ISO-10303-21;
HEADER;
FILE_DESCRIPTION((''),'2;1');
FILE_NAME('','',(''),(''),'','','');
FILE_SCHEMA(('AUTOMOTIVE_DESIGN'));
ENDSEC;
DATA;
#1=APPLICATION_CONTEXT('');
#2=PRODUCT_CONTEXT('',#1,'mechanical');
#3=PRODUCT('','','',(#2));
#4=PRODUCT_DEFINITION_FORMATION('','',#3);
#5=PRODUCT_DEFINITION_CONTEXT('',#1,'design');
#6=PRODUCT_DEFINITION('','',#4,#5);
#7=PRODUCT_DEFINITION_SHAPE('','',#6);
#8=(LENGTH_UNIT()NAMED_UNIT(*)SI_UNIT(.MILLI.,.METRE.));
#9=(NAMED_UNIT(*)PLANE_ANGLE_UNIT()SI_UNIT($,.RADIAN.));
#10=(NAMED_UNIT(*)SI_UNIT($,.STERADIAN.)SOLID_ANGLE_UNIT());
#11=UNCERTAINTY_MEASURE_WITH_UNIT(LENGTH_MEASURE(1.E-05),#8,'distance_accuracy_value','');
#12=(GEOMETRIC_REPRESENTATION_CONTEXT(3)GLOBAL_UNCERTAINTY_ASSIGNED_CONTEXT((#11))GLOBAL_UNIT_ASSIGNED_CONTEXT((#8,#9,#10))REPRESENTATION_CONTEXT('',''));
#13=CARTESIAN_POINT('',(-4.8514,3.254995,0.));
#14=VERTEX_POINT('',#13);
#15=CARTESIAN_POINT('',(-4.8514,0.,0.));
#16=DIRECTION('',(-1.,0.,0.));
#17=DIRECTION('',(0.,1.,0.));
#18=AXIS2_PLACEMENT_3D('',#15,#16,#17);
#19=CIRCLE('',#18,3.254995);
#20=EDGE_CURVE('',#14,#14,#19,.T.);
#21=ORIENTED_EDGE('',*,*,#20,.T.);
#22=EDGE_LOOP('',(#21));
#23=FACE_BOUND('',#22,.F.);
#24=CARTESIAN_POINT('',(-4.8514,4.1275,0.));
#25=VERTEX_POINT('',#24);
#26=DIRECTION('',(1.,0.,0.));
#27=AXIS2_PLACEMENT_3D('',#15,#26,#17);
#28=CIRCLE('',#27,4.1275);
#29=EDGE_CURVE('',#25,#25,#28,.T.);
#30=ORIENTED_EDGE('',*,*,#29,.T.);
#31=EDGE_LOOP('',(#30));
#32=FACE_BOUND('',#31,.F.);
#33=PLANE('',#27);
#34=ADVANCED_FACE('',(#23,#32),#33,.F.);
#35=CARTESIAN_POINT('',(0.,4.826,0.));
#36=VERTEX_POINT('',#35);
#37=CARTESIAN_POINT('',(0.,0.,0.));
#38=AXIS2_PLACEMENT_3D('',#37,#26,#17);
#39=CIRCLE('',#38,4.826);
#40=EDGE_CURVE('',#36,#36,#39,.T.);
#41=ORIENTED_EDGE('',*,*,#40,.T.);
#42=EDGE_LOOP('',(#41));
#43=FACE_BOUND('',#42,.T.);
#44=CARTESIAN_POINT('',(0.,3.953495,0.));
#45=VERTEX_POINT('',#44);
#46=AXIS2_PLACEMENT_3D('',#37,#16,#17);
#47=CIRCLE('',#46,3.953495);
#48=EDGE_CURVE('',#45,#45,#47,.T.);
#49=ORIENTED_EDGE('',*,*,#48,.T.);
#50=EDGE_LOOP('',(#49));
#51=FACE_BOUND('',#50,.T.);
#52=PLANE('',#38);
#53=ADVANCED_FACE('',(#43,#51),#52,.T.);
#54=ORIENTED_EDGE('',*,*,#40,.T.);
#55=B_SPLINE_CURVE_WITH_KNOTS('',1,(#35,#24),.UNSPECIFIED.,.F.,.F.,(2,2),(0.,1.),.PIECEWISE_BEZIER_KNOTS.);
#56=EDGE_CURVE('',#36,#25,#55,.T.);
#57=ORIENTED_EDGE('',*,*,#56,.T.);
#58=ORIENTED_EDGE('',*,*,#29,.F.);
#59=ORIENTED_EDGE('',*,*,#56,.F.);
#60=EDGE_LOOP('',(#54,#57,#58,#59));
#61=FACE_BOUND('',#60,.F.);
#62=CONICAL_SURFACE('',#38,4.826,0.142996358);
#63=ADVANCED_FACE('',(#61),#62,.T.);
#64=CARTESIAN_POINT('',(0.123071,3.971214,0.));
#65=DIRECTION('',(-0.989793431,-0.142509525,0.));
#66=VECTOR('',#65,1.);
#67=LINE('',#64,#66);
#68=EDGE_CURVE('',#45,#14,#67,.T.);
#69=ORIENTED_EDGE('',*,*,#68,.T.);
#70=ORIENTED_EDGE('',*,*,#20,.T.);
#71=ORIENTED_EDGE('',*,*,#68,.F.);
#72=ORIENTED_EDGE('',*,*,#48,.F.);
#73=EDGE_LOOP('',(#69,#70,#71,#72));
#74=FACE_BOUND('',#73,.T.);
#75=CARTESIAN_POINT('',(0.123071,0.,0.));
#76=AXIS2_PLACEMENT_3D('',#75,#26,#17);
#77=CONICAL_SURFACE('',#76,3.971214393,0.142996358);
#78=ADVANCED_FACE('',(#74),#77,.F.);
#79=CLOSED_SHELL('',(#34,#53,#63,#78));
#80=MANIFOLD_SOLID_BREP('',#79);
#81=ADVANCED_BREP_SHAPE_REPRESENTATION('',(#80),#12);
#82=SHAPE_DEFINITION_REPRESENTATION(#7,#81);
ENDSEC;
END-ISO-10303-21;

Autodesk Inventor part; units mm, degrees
ref_plane "XZ Plane" through (0, 0, 0) normal (0, 1, 0) x (-1, 0, 0)
ref_plane "XY Plane" through (0, 0, 0) normal (0, 0, 1) x (1, 0, 0)
sketch "Sketch1" plane through (0, 0, 0) normal (1, 0, 0) x (0, 1, 0)
  circle A0 centre (0, 0) radius 4.826
  dimension "d0" = 9.652
ref_plane "Work Plane1" through (-4.8514, 0, 0) normal (1, 0, 0) x (0, 1, 0)
sketch "Sketch2" plane through (-4.8514, 0, 0) normal (1, 0, 0) x (0, 1, 0)
  circle A0 centre (0, 0) radius 4.1275
  dimension "d2" = 8.255
loft "Loft1" add profiles "Sketch1", "Sketch2"
shell "Shell1" thickness 0.8636 removed faces 2 at (0, 1.0666, -0.7041) at (-4.8514, -0.4879, 1.9449)
properties part number "Beveled Sleeve"
